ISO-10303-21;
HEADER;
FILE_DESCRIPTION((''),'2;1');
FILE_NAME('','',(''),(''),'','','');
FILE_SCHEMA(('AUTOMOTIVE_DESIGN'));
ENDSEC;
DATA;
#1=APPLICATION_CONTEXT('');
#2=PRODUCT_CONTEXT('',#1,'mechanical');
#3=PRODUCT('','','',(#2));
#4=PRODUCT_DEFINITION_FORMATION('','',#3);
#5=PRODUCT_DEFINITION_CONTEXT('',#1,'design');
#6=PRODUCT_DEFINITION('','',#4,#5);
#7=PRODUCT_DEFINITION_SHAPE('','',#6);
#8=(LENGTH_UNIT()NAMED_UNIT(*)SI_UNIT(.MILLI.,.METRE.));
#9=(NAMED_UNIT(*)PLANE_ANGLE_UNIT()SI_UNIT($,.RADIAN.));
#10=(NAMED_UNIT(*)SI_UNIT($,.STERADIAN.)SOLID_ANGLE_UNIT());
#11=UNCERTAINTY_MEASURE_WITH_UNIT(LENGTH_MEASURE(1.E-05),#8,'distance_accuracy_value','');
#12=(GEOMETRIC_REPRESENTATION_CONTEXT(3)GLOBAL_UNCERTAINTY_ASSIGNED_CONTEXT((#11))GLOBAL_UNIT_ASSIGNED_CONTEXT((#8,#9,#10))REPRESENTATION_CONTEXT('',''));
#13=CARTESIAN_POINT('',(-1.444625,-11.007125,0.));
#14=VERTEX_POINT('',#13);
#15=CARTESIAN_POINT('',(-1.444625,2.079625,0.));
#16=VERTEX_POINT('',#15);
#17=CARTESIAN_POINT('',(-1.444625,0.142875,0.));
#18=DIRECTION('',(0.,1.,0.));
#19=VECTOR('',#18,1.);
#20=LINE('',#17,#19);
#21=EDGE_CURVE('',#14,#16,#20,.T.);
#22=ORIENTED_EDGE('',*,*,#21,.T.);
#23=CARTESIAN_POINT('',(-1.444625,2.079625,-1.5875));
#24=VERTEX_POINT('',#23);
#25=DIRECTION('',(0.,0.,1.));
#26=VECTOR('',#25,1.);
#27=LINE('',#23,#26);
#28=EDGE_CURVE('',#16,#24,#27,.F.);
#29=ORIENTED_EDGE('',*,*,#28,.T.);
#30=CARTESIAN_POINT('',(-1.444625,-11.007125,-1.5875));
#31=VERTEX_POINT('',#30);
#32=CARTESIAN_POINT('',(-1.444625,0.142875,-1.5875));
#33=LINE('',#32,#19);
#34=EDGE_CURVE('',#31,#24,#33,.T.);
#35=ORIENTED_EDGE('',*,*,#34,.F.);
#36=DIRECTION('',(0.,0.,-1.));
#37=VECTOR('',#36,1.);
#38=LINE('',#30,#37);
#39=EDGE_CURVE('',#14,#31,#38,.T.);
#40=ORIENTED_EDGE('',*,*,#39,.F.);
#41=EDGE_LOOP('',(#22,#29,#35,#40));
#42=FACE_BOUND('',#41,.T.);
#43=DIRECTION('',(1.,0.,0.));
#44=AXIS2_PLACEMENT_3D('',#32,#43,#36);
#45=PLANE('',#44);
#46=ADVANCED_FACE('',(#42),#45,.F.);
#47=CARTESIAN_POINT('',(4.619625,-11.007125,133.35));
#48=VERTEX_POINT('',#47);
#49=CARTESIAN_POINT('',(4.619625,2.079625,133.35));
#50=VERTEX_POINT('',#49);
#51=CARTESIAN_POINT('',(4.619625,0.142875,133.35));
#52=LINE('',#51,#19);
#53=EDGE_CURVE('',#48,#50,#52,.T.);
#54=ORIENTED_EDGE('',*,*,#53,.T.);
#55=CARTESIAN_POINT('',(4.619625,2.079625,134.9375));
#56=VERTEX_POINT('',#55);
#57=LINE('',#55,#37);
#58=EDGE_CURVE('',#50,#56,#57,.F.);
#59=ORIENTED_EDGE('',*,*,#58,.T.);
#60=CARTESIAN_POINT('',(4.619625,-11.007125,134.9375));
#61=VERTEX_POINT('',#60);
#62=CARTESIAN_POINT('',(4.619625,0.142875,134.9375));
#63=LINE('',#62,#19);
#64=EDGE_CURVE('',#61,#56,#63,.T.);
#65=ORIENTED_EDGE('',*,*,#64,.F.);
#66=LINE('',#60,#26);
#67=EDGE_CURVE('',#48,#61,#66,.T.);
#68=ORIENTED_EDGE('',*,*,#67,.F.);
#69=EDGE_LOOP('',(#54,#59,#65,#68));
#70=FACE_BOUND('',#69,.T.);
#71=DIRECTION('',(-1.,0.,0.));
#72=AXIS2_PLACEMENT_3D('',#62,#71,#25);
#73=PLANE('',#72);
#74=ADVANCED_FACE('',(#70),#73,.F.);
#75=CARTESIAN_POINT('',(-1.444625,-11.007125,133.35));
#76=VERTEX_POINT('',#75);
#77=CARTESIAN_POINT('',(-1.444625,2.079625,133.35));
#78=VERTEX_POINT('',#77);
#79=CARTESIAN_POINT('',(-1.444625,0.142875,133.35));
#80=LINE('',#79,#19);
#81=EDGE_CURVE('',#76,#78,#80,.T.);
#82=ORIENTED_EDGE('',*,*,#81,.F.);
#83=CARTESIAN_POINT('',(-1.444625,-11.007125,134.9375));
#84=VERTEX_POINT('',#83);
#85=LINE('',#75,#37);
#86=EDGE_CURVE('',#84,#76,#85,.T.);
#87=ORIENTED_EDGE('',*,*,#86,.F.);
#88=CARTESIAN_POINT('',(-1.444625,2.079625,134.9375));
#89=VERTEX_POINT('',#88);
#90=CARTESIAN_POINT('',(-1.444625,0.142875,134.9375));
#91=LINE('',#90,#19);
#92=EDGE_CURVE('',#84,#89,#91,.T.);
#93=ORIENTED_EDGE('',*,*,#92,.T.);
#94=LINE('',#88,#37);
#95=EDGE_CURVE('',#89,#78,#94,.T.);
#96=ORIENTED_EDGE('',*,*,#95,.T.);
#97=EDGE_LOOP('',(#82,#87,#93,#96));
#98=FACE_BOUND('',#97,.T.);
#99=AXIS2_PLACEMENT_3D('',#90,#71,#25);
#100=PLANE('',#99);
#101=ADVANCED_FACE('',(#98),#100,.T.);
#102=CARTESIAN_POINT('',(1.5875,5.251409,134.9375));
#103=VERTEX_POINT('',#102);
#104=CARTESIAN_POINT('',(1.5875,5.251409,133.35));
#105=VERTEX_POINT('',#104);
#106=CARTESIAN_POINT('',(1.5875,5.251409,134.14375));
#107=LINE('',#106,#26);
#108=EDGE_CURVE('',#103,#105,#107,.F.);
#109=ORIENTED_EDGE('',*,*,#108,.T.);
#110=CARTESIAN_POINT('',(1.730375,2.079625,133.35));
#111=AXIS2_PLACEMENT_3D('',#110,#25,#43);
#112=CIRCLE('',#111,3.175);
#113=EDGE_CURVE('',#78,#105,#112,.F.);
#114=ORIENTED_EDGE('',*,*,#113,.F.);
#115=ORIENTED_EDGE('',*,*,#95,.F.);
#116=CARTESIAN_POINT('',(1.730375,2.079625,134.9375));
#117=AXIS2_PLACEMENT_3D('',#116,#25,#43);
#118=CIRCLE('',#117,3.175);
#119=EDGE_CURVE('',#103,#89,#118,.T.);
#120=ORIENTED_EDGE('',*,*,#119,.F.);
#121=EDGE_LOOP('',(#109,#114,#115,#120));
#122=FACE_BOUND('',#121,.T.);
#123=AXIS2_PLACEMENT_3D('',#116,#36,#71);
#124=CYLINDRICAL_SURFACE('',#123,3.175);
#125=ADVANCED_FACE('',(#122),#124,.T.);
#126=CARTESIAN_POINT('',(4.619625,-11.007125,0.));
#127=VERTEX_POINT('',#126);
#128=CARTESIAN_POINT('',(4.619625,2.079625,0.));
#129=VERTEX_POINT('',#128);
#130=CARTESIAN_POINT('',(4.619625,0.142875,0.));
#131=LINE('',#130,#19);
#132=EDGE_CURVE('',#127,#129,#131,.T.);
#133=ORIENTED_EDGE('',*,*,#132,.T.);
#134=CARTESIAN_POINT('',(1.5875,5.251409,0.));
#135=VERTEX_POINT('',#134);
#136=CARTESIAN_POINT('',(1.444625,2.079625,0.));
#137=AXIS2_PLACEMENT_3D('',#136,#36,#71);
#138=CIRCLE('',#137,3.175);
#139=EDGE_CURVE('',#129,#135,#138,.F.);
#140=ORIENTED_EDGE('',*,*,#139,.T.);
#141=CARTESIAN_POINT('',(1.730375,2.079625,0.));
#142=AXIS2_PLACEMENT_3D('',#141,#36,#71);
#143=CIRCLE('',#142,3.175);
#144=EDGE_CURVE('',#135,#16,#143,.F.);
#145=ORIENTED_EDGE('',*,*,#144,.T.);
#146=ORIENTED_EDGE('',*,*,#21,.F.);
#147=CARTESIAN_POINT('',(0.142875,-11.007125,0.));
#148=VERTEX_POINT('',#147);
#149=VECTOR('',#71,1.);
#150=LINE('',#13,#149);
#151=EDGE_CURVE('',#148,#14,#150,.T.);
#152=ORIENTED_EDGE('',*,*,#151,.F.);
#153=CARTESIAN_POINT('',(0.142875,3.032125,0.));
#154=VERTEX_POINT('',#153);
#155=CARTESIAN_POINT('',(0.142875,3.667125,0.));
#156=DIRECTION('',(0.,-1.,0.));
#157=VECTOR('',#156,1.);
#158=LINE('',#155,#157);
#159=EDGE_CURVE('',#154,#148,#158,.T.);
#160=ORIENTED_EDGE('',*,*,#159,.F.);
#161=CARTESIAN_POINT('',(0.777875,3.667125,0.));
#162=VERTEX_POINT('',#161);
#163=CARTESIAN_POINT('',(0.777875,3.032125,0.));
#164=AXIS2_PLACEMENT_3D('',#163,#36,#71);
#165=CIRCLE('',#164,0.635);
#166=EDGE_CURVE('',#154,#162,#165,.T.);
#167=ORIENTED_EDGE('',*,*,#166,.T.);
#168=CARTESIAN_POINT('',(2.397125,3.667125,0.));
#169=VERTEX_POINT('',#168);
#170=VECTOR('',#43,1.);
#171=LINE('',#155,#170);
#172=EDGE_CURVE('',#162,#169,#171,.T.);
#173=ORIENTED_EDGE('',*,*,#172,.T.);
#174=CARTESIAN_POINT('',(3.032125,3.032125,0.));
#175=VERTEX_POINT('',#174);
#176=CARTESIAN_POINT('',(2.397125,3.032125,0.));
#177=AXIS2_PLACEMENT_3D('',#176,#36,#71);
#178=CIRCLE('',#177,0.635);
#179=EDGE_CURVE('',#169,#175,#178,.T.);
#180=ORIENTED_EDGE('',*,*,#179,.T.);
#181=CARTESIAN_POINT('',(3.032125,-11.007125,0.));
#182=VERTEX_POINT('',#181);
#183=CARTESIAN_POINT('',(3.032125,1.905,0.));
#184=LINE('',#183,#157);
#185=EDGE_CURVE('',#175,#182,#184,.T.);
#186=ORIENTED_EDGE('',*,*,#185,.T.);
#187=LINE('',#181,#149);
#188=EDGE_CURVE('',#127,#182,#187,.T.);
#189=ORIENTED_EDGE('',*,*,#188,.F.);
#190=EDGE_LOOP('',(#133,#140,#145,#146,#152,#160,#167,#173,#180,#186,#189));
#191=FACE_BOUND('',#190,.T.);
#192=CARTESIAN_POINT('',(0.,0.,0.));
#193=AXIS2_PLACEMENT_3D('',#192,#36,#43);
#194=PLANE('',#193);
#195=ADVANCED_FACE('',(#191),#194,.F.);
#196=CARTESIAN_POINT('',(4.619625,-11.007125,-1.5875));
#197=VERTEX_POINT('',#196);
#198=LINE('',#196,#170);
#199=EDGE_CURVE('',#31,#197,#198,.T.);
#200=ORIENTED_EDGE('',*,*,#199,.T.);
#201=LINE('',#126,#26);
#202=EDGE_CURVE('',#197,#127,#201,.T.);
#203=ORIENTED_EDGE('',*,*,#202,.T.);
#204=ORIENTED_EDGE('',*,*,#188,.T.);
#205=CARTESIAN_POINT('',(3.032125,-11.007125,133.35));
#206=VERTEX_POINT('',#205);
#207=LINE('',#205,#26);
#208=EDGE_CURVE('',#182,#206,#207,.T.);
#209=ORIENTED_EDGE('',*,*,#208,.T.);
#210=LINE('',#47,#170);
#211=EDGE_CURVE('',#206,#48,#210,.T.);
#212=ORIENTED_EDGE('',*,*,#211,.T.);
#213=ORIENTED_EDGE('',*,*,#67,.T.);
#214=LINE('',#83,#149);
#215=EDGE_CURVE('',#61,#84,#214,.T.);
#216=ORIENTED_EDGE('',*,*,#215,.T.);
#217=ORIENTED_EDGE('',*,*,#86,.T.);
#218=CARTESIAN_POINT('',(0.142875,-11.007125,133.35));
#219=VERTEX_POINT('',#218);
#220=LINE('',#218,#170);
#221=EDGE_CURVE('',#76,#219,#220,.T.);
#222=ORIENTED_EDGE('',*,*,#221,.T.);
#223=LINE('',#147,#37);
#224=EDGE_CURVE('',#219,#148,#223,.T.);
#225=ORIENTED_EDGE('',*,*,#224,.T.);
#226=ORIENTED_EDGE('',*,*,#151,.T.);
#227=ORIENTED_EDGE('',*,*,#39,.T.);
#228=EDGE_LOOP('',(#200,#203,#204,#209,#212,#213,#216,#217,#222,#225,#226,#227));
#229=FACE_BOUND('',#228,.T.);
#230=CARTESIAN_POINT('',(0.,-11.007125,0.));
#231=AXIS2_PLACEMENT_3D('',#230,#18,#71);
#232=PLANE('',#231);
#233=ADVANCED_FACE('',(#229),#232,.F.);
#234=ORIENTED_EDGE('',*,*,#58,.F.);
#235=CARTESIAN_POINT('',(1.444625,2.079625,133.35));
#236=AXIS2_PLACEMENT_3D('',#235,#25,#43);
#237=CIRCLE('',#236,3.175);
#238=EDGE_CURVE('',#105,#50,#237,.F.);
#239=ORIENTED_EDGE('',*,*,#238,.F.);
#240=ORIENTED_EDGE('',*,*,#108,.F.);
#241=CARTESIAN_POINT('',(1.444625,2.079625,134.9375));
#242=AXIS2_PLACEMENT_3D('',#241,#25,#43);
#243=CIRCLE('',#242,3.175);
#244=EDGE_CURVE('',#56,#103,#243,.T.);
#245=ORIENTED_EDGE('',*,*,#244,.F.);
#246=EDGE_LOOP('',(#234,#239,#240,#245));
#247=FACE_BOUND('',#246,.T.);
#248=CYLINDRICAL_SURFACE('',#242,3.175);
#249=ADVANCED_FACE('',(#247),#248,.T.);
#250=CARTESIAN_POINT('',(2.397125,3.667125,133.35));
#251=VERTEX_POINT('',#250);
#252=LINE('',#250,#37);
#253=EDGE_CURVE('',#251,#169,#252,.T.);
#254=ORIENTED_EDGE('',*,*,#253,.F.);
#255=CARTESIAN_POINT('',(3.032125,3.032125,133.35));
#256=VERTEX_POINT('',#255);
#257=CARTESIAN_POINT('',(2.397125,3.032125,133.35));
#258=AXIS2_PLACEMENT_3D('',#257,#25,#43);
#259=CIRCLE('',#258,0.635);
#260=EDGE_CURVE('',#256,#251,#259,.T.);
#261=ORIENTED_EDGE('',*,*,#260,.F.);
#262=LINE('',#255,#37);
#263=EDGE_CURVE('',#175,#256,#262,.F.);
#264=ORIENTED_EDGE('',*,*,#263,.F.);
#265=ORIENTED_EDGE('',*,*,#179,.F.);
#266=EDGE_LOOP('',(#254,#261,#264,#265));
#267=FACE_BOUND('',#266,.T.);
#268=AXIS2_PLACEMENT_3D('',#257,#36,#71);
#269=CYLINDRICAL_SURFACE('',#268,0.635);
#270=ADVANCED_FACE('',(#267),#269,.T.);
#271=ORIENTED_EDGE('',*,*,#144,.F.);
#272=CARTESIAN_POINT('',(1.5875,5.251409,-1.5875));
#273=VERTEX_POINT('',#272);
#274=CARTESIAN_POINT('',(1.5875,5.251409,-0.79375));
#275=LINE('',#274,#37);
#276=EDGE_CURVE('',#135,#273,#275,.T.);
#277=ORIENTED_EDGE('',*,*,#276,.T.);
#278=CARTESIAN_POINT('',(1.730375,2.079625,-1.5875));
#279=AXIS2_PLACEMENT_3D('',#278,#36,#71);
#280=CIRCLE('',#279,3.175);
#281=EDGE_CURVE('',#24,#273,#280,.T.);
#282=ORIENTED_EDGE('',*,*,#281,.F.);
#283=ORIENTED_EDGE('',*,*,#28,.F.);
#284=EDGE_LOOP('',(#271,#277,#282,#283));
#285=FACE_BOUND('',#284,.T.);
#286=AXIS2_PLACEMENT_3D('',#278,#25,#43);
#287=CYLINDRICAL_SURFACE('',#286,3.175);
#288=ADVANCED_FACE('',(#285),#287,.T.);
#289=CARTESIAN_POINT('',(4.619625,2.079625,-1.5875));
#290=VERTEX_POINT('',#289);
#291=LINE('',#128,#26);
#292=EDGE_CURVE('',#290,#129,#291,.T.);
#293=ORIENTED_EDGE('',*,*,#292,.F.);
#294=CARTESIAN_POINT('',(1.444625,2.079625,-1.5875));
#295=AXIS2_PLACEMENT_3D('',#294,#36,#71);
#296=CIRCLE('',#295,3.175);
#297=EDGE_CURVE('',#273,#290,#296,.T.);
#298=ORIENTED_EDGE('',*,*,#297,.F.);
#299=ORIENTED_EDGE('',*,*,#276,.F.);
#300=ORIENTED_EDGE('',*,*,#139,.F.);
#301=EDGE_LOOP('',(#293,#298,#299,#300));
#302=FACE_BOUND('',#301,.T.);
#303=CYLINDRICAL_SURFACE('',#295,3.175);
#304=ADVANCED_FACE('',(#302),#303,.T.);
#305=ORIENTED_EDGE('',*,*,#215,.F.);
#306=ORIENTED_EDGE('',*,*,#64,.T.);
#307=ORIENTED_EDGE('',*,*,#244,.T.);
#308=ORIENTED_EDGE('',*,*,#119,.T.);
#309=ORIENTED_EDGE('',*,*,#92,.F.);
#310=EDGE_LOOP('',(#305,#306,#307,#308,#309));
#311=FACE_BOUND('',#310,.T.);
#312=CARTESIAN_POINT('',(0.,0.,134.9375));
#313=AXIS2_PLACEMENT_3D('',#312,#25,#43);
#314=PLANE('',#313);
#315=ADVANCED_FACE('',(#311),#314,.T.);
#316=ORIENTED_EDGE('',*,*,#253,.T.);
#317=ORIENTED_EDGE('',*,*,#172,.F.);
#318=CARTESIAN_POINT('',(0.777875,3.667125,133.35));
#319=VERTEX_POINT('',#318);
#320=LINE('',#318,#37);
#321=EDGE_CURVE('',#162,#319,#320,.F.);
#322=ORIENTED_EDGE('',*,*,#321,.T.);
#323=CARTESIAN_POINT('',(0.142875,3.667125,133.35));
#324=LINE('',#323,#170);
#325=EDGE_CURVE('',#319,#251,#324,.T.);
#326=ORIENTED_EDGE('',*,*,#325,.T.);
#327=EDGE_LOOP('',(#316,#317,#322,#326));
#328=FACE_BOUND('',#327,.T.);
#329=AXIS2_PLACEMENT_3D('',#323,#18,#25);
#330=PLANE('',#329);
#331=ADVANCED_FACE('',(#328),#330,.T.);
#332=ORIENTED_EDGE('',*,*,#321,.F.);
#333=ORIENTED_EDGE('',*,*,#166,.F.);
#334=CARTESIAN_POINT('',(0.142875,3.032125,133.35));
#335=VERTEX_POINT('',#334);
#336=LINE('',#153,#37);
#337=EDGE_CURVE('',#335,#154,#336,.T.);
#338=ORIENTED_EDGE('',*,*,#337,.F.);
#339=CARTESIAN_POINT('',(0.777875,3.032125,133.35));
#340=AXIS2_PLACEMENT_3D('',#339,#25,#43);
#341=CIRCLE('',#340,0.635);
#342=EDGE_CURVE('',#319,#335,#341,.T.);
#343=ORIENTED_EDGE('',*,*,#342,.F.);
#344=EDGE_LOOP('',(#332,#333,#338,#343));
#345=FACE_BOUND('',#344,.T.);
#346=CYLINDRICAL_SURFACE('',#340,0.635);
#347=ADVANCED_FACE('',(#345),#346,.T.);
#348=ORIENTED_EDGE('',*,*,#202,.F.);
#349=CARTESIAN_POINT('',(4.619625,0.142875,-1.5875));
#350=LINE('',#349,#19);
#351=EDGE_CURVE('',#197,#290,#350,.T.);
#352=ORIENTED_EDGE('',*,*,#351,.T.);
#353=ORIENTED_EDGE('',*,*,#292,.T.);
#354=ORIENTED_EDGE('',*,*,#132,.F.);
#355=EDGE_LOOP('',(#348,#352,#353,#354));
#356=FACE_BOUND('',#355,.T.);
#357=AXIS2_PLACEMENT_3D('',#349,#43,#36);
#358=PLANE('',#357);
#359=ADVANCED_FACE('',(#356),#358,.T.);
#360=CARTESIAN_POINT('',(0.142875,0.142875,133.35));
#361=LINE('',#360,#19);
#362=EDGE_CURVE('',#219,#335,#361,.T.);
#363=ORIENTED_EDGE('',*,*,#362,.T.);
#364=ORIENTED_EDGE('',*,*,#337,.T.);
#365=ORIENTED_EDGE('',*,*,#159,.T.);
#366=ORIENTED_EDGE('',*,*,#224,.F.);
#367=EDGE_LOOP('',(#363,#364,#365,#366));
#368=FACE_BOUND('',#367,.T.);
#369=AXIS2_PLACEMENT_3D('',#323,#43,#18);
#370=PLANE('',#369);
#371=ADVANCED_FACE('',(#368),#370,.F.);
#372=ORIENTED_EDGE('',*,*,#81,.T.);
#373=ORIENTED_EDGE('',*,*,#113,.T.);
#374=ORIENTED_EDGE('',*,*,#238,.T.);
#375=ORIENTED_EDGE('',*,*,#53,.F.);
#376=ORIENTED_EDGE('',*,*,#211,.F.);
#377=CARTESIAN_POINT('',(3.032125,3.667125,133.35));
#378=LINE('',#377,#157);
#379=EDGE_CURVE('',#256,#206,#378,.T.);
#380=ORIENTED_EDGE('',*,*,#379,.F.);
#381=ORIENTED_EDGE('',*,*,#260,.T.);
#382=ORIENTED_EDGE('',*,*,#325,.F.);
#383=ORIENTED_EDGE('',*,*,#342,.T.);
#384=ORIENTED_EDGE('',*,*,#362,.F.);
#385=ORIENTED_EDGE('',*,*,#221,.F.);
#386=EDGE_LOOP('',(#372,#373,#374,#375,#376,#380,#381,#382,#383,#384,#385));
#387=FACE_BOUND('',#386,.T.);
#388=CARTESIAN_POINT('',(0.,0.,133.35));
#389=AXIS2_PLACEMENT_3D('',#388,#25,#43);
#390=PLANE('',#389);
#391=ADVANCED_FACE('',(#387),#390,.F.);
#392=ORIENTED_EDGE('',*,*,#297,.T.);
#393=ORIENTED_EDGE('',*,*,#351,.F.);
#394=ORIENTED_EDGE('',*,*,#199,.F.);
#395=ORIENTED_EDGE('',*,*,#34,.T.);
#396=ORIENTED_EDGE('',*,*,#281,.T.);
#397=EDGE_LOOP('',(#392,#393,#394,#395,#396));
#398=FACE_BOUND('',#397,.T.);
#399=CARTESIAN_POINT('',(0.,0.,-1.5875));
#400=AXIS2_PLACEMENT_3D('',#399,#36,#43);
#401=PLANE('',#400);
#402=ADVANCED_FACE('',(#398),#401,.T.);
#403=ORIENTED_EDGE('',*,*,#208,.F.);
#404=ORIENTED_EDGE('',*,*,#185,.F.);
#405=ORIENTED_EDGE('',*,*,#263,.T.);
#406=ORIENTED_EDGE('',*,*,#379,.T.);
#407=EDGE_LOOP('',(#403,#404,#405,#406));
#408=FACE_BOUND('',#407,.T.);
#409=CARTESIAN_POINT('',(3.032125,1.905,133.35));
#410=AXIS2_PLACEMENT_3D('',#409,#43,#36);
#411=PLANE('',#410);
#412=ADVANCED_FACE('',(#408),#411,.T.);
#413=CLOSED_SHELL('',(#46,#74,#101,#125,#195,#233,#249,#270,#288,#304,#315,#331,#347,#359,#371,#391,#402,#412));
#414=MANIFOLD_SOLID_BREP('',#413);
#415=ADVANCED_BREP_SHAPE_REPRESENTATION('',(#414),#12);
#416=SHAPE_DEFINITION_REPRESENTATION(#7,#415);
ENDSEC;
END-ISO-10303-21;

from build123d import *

# Parameters (mm, degrees)
BOSS_EXTRUDE1_DEPTH  = 133.35
SKETCH2_W            = 6.06425
SKETCH2_H            = 5.11175
BOSS_EXTRUDE2_DEPTH  = 1.5875
FILLET1_R            = 3.175
FILLET1_OF_MIRROR1_R = 3.175
FILLET2_R            = 0.635
BOSS_EXTRUDE3_DEPTH  = 11.150000052


with BuildPart() as part:
    # Sketch1 → Boss-Extrude1 (new body)
    with BuildSketch(Plane.XY):
        Polygon((0.142875, 3.667125), (3.032125, 3.667125), (3.032125, 1.905), (3.032125, 0.142875), (0.142875, 0.142875), (0.142875, 1.905), align=None)
    extrude(amount=BOSS_EXTRUDE1_DEPTH)

    # Sketch2 → Boss-Extrude2 (add)
    with BuildSketch(Plane.XY.offset(133.35)):
        with Locations((1.5875, 2.69875)):
            Rectangle(SKETCH2_W, SKETCH2_H)
    boss_extrude2 = extrude(amount=BOSS_EXTRUDE2_DEPTH)

    # Fillet1
    # the kernel refuses this fillet: 3.175 mm, written as the material it takes off along each edge
    with BuildSketch(Plane(origin=(-1.444625, 5.254625, 125.4125), x_dir=(0, -1, 0), z_dir=(0, 0, 1))) as fillet1_piece_1:
        with BuildLine():
            CenterArc((FILLET1_R, FILLET1_R), FILLET1_R, 180, 90)
            Line((0, FILLET1_R), (0, 0))
            Line((0, 0), (FILLET1_R, 0))
        make_face()
    extrude(amount=17.4625, mode=Mode.SUBTRACT)
    with BuildSketch(Plane(origin=(4.619625, 5.254625, 125.4125), x_dir=(0, -1, 0), z_dir=(0, 0, 1))) as fillet1_piece_2:
        with BuildLine():
            CenterArc((FILLET1_R, -FILLET1_R), FILLET1_R, 90, 90)
            Line((0, -FILLET1_R), (0, 0))
            Line((0, 0), (FILLET1_R, 0))
        make_face()
    extrude(amount=17.4625, mode=Mode.SUBTRACT)

    # Mirror1: Boss-Extrude2 across plane
    add(boss_extrude2.mirror(Plane.XY.offset(66.675)))

    # Fillet1 of Mirror1
    # the kernel refuses this fillet: 3.175 mm, written as the material it takes off along each edge
    with BuildSketch(Plane(origin=(-1.444625, 5.254625, 7.9375), x_dir=(0, -1, 0), z_dir=(0, 0, -1))) as fillet1_of_mirror1_piece_1:
        with BuildLine():
            CenterArc((FILLET1_OF_MIRROR1_R, -FILLET1_OF_MIRROR1_R), FILLET1_OF_MIRROR1_R, 90, 90)
            Line((0, -FILLET1_OF_MIRROR1_R), (0, 0))
            Line((0, 0), (FILLET1_OF_MIRROR1_R, 0))
        make_face()
    extrude(amount=17.4625, mode=Mode.SUBTRACT)
    with BuildSketch(Plane(origin=(4.619625, 5.254625, 7.9375), x_dir=(0, -1, 0), z_dir=(0, 0, -1))) as fillet1_of_mirror1_piece_2:
        with BuildLine():
            CenterArc((FILLET1_OF_MIRROR1_R, FILLET1_OF_MIRROR1_R), FILLET1_OF_MIRROR1_R, 180, 90)
            Line((0, FILLET1_OF_MIRROR1_R), (0, 0))
            Line((0, 0), (FILLET1_OF_MIRROR1_R, 0))
        make_face()
    extrude(amount=17.4625, mode=Mode.SUBTRACT)

    # Fillet2
    fillet2_edges = [part.edges().sort_by_distance(p)[0] for p in [
        (3.032125, 3.667125, 66.675),
        (0.142875, 3.667125, 66.675),
    ]]
    fillet(fillet2_edges, radius=FILLET2_R)

    # Sketch3 → Boss-Extrude3 (add)
    with BuildSketch(Plane.XZ.offset(-0.142875)):
        Polygon((-1.444625, 134.9375), (4.619625, 134.9375), (4.619625, 133.35), (3.032125, 133.35), (3.032125, 0), (4.619625, 0), (4.619625, -1.5875), (-1.444625, -1.5875), (-1.444625, 0), (0.142875, 0), (0.142875, 133.35), (-1.444625, 133.35), align=None)
    extrude(amount=BOSS_EXTRUDE3_DEPTH)


solid = part.part
